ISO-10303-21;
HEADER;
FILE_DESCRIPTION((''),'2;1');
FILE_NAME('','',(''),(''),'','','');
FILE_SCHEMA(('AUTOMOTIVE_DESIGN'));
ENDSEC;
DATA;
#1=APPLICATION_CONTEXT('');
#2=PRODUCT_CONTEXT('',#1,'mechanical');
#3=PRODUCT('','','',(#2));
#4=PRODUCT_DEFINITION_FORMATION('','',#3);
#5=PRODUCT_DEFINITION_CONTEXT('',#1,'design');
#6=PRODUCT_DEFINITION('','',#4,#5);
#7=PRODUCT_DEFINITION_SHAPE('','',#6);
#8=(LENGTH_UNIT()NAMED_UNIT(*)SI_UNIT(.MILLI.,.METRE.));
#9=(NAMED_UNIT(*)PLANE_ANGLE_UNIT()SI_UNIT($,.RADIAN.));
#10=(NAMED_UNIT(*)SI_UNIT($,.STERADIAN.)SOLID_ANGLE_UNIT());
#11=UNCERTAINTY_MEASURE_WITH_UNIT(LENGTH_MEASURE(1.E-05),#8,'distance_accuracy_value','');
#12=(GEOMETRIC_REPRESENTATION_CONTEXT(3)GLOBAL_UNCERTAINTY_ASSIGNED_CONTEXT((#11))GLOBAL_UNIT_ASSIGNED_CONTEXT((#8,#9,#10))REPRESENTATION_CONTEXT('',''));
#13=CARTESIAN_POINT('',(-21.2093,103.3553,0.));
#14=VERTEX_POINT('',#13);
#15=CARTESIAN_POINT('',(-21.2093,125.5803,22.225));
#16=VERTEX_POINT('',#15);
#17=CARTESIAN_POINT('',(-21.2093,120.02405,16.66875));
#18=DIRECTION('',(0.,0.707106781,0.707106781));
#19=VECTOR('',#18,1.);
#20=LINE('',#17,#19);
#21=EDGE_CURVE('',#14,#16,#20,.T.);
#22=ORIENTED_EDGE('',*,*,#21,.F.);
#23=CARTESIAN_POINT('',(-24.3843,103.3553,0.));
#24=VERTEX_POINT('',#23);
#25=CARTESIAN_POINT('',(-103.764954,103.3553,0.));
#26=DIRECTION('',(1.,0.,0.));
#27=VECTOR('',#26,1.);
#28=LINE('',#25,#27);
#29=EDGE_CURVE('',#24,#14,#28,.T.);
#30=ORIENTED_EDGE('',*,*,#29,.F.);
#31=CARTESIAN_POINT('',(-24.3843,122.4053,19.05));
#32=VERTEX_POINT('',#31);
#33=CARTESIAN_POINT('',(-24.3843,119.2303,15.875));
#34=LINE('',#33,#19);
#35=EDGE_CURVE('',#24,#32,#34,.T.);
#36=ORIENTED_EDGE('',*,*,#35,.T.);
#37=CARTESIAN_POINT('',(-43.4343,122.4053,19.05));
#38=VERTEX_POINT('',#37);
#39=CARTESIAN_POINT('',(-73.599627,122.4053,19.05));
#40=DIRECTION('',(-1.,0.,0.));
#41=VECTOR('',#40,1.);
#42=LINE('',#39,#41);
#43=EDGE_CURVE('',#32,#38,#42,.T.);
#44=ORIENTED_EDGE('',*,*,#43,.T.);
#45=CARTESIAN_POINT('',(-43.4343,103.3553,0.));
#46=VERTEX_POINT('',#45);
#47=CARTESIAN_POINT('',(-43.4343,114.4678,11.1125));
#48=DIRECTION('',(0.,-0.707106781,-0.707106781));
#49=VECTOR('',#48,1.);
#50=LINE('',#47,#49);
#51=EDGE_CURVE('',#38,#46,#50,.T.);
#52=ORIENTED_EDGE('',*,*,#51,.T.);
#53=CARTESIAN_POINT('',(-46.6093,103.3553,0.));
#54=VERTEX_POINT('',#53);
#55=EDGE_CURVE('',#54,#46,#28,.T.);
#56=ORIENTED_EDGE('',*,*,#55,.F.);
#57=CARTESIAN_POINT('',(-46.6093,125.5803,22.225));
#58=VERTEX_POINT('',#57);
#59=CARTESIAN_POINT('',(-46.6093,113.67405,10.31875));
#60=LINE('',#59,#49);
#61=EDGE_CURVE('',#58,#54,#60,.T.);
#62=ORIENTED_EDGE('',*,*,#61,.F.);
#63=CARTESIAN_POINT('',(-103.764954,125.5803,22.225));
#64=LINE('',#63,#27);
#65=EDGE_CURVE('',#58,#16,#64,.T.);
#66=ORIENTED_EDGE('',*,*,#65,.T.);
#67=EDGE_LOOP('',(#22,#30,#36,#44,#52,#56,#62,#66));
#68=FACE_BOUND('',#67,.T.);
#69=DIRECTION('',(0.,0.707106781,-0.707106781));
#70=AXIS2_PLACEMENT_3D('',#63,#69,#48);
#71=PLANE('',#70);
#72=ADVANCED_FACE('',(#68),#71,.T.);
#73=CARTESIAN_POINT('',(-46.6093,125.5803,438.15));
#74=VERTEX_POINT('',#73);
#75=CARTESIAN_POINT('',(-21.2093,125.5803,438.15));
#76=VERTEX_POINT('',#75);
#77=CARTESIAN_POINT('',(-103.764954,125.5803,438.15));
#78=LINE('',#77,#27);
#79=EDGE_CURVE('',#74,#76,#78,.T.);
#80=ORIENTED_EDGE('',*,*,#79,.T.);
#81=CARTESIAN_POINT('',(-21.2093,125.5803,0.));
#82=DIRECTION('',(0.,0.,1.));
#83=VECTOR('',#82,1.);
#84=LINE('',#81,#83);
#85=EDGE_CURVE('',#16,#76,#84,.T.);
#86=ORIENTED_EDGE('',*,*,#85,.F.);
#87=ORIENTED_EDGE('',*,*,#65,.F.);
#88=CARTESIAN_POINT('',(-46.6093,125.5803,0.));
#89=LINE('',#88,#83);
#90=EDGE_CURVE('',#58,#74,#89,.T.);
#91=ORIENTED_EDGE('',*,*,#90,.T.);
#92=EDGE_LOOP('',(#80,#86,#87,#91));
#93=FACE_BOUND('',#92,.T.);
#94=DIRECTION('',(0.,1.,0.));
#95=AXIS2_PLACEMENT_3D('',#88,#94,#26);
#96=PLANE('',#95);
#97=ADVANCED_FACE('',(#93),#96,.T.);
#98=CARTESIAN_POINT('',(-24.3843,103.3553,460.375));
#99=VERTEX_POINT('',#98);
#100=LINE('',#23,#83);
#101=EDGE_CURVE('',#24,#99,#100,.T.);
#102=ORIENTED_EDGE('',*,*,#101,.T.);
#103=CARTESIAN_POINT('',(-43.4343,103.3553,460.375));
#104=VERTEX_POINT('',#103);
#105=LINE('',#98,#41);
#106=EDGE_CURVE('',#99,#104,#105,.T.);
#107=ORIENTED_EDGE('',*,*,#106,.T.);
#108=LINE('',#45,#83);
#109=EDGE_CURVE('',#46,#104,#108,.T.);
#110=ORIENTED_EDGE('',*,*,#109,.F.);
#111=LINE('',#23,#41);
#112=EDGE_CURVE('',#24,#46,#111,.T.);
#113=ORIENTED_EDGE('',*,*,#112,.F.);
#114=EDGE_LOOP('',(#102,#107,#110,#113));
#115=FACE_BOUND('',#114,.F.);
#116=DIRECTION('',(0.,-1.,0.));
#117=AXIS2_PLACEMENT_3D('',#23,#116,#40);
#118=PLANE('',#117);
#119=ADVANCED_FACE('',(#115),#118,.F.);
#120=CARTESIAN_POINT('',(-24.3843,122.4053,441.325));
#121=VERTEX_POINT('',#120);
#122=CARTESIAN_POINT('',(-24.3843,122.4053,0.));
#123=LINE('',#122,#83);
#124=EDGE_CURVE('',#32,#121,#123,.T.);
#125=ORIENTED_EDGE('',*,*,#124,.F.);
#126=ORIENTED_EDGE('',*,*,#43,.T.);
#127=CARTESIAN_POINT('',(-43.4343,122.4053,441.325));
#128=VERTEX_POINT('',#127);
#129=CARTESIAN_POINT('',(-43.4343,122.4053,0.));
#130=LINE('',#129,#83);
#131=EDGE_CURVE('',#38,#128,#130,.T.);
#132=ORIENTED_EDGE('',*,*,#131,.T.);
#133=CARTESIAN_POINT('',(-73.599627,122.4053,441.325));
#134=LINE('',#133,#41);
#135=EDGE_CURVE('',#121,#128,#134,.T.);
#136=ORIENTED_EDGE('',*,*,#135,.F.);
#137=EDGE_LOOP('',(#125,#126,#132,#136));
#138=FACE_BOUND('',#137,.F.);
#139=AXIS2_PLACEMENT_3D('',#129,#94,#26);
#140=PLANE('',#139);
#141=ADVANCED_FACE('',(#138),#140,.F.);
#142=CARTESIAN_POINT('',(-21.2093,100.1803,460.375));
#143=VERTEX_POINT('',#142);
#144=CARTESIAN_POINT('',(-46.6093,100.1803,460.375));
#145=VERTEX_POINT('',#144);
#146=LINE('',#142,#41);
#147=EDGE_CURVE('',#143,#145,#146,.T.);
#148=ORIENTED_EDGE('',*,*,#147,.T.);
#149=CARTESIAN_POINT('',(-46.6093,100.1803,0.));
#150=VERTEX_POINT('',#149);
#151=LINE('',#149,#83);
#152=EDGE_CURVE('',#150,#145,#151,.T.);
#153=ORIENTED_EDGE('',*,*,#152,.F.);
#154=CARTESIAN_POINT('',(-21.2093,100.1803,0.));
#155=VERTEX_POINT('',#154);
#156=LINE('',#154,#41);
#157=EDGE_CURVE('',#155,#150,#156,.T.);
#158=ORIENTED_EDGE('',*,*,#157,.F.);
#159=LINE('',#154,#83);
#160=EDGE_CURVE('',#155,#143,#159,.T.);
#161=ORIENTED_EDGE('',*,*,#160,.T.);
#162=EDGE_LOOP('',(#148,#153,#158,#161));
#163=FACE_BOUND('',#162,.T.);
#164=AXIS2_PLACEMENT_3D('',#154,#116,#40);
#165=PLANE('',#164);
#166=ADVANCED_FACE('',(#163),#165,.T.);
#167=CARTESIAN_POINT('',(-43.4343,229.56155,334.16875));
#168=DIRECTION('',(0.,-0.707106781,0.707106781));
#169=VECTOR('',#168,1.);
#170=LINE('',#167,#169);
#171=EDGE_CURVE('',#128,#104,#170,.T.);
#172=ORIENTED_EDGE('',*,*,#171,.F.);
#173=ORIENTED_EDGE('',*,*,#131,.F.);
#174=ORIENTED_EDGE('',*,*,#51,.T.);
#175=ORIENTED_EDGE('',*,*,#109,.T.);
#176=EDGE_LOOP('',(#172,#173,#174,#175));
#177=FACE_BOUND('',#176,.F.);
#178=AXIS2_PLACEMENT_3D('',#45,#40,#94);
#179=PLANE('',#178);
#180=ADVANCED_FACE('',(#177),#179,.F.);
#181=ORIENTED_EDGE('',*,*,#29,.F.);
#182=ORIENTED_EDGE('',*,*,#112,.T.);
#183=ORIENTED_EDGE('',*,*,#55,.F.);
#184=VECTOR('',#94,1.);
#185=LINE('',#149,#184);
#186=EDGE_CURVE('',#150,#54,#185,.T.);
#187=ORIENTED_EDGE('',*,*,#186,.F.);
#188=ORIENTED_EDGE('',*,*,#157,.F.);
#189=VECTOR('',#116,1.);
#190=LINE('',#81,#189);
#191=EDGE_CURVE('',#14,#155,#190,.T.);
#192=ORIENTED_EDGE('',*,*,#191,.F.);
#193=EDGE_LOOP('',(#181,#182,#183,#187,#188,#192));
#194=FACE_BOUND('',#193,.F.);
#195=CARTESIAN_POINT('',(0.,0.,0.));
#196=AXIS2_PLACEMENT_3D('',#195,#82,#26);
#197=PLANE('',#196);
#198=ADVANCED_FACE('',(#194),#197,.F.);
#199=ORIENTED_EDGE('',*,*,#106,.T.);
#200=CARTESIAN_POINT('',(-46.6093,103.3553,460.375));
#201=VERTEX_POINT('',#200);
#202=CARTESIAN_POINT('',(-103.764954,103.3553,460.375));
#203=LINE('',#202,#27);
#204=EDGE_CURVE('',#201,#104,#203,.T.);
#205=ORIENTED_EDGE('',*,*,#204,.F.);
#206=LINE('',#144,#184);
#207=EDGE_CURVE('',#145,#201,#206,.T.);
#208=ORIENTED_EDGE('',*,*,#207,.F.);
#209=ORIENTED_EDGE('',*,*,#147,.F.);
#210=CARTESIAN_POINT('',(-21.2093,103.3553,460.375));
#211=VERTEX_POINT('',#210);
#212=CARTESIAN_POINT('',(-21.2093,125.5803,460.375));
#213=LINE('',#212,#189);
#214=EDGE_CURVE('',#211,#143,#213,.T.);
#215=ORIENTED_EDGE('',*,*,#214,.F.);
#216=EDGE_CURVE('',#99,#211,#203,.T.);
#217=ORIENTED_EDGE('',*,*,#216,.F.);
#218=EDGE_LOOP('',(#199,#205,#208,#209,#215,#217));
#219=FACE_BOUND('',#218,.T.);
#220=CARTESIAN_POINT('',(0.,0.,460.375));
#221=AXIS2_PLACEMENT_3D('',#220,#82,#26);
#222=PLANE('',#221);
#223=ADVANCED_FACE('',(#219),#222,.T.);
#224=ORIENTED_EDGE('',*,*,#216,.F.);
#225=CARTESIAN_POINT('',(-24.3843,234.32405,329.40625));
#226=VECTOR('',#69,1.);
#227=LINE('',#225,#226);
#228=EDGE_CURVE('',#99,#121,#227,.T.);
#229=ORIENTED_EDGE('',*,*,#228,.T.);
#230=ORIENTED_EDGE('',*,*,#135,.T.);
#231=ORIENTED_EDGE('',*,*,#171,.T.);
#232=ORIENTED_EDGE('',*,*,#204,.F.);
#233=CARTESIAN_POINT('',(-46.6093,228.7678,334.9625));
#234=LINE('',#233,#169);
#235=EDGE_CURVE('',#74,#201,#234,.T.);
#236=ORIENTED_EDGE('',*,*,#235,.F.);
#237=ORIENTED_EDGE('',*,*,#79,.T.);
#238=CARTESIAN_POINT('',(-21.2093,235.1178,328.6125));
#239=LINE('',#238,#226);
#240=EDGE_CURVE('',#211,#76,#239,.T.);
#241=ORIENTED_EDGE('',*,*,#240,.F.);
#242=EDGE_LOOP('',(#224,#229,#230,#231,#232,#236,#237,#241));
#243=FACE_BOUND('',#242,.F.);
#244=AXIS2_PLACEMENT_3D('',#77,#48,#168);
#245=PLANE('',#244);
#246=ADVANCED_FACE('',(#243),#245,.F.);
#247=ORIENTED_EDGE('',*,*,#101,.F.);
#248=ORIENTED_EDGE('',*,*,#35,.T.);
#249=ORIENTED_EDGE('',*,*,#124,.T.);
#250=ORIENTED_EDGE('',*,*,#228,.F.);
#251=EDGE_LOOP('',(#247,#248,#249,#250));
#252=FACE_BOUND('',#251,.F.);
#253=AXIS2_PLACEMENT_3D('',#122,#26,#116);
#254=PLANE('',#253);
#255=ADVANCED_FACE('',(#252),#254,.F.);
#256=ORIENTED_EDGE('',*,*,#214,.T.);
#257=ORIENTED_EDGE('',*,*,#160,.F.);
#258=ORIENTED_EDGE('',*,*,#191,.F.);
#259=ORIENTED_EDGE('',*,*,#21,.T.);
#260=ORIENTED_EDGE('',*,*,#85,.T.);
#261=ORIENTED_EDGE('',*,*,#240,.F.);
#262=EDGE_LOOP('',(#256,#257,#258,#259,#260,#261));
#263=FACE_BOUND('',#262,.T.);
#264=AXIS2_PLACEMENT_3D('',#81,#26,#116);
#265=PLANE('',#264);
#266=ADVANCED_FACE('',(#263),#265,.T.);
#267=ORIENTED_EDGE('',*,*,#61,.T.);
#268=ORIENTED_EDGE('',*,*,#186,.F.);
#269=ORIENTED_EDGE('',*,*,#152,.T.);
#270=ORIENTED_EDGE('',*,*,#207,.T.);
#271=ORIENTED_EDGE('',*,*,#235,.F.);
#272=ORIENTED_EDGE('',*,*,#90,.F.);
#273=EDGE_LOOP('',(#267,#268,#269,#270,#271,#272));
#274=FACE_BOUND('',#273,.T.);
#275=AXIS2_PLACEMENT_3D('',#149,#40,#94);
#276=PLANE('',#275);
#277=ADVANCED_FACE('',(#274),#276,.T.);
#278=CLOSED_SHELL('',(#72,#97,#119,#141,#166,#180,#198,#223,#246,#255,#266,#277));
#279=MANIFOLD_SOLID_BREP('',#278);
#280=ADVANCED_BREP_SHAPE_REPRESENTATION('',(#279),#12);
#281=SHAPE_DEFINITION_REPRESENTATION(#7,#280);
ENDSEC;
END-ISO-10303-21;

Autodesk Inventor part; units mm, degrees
ref_plane "YZ Plane" through (0, 0, 0) normal (1, 0, 0) x (0, 1, 0)
ref_plane "XZ Plane" through (0, 0, 0) normal (0, 1, 0) x (-1, 0, 0)
ref_plane "XY Plane" through (0, 0, 0) normal (0, 0, 1) x (1, 0, 0)
sketch "Sketch1" plane through (0, 0, 0) normal (0, 0, 1) x (1, 0, 0)
  line L0 (-46.6093, 125.5803) -> (-21.2093, 125.5803)
  line L1 (-21.2093, 125.5803) -> (-21.2093, 100.1803)
  line L2 (-21.2093, 100.1803) -> (-46.6093, 100.1803)
  line L3 (-46.6093, 100.1803) -> (-46.6093, 125.5803)
  line L4 (-43.4343, 122.4053) -> (-24.3843, 122.4053)
  line L5 (-24.3843, 122.4053) -> (-24.3843, 103.3553)
  line L6 (-24.3843, 103.3553) -> (-43.4343, 103.3553)
  line L7 (-43.4343, 103.3553) -> (-43.4343, 122.4053)
  point P0 (0, 0)
  dimension "d0" = 25.4
  dimension "d1" = 25.4
  dimension "d2" = 3.175
extrude "Extrusion1" add sketch "Sketch1" along normal blind 460.375
sketch "Sketch2" plane through (-46.6093, 100.1803, 0) normal (-1, 0, 0) x (0, 0, 1)
  point P0 (0, -100.1803)
sketch "Sketch3" plane through (-46.6093, 100.1803, 0) normal (-1, 0, 0) x (0, 0, 1)
  point P0 (0, -100.1803)
chamfer "Chamfer1" distance 22.225 angle 45 2 edges at (-33.9093, 125.5803, 460.375) (-33.9093, 125.5803, 0)
properties part number "2018 Bottom Cross Bar"
